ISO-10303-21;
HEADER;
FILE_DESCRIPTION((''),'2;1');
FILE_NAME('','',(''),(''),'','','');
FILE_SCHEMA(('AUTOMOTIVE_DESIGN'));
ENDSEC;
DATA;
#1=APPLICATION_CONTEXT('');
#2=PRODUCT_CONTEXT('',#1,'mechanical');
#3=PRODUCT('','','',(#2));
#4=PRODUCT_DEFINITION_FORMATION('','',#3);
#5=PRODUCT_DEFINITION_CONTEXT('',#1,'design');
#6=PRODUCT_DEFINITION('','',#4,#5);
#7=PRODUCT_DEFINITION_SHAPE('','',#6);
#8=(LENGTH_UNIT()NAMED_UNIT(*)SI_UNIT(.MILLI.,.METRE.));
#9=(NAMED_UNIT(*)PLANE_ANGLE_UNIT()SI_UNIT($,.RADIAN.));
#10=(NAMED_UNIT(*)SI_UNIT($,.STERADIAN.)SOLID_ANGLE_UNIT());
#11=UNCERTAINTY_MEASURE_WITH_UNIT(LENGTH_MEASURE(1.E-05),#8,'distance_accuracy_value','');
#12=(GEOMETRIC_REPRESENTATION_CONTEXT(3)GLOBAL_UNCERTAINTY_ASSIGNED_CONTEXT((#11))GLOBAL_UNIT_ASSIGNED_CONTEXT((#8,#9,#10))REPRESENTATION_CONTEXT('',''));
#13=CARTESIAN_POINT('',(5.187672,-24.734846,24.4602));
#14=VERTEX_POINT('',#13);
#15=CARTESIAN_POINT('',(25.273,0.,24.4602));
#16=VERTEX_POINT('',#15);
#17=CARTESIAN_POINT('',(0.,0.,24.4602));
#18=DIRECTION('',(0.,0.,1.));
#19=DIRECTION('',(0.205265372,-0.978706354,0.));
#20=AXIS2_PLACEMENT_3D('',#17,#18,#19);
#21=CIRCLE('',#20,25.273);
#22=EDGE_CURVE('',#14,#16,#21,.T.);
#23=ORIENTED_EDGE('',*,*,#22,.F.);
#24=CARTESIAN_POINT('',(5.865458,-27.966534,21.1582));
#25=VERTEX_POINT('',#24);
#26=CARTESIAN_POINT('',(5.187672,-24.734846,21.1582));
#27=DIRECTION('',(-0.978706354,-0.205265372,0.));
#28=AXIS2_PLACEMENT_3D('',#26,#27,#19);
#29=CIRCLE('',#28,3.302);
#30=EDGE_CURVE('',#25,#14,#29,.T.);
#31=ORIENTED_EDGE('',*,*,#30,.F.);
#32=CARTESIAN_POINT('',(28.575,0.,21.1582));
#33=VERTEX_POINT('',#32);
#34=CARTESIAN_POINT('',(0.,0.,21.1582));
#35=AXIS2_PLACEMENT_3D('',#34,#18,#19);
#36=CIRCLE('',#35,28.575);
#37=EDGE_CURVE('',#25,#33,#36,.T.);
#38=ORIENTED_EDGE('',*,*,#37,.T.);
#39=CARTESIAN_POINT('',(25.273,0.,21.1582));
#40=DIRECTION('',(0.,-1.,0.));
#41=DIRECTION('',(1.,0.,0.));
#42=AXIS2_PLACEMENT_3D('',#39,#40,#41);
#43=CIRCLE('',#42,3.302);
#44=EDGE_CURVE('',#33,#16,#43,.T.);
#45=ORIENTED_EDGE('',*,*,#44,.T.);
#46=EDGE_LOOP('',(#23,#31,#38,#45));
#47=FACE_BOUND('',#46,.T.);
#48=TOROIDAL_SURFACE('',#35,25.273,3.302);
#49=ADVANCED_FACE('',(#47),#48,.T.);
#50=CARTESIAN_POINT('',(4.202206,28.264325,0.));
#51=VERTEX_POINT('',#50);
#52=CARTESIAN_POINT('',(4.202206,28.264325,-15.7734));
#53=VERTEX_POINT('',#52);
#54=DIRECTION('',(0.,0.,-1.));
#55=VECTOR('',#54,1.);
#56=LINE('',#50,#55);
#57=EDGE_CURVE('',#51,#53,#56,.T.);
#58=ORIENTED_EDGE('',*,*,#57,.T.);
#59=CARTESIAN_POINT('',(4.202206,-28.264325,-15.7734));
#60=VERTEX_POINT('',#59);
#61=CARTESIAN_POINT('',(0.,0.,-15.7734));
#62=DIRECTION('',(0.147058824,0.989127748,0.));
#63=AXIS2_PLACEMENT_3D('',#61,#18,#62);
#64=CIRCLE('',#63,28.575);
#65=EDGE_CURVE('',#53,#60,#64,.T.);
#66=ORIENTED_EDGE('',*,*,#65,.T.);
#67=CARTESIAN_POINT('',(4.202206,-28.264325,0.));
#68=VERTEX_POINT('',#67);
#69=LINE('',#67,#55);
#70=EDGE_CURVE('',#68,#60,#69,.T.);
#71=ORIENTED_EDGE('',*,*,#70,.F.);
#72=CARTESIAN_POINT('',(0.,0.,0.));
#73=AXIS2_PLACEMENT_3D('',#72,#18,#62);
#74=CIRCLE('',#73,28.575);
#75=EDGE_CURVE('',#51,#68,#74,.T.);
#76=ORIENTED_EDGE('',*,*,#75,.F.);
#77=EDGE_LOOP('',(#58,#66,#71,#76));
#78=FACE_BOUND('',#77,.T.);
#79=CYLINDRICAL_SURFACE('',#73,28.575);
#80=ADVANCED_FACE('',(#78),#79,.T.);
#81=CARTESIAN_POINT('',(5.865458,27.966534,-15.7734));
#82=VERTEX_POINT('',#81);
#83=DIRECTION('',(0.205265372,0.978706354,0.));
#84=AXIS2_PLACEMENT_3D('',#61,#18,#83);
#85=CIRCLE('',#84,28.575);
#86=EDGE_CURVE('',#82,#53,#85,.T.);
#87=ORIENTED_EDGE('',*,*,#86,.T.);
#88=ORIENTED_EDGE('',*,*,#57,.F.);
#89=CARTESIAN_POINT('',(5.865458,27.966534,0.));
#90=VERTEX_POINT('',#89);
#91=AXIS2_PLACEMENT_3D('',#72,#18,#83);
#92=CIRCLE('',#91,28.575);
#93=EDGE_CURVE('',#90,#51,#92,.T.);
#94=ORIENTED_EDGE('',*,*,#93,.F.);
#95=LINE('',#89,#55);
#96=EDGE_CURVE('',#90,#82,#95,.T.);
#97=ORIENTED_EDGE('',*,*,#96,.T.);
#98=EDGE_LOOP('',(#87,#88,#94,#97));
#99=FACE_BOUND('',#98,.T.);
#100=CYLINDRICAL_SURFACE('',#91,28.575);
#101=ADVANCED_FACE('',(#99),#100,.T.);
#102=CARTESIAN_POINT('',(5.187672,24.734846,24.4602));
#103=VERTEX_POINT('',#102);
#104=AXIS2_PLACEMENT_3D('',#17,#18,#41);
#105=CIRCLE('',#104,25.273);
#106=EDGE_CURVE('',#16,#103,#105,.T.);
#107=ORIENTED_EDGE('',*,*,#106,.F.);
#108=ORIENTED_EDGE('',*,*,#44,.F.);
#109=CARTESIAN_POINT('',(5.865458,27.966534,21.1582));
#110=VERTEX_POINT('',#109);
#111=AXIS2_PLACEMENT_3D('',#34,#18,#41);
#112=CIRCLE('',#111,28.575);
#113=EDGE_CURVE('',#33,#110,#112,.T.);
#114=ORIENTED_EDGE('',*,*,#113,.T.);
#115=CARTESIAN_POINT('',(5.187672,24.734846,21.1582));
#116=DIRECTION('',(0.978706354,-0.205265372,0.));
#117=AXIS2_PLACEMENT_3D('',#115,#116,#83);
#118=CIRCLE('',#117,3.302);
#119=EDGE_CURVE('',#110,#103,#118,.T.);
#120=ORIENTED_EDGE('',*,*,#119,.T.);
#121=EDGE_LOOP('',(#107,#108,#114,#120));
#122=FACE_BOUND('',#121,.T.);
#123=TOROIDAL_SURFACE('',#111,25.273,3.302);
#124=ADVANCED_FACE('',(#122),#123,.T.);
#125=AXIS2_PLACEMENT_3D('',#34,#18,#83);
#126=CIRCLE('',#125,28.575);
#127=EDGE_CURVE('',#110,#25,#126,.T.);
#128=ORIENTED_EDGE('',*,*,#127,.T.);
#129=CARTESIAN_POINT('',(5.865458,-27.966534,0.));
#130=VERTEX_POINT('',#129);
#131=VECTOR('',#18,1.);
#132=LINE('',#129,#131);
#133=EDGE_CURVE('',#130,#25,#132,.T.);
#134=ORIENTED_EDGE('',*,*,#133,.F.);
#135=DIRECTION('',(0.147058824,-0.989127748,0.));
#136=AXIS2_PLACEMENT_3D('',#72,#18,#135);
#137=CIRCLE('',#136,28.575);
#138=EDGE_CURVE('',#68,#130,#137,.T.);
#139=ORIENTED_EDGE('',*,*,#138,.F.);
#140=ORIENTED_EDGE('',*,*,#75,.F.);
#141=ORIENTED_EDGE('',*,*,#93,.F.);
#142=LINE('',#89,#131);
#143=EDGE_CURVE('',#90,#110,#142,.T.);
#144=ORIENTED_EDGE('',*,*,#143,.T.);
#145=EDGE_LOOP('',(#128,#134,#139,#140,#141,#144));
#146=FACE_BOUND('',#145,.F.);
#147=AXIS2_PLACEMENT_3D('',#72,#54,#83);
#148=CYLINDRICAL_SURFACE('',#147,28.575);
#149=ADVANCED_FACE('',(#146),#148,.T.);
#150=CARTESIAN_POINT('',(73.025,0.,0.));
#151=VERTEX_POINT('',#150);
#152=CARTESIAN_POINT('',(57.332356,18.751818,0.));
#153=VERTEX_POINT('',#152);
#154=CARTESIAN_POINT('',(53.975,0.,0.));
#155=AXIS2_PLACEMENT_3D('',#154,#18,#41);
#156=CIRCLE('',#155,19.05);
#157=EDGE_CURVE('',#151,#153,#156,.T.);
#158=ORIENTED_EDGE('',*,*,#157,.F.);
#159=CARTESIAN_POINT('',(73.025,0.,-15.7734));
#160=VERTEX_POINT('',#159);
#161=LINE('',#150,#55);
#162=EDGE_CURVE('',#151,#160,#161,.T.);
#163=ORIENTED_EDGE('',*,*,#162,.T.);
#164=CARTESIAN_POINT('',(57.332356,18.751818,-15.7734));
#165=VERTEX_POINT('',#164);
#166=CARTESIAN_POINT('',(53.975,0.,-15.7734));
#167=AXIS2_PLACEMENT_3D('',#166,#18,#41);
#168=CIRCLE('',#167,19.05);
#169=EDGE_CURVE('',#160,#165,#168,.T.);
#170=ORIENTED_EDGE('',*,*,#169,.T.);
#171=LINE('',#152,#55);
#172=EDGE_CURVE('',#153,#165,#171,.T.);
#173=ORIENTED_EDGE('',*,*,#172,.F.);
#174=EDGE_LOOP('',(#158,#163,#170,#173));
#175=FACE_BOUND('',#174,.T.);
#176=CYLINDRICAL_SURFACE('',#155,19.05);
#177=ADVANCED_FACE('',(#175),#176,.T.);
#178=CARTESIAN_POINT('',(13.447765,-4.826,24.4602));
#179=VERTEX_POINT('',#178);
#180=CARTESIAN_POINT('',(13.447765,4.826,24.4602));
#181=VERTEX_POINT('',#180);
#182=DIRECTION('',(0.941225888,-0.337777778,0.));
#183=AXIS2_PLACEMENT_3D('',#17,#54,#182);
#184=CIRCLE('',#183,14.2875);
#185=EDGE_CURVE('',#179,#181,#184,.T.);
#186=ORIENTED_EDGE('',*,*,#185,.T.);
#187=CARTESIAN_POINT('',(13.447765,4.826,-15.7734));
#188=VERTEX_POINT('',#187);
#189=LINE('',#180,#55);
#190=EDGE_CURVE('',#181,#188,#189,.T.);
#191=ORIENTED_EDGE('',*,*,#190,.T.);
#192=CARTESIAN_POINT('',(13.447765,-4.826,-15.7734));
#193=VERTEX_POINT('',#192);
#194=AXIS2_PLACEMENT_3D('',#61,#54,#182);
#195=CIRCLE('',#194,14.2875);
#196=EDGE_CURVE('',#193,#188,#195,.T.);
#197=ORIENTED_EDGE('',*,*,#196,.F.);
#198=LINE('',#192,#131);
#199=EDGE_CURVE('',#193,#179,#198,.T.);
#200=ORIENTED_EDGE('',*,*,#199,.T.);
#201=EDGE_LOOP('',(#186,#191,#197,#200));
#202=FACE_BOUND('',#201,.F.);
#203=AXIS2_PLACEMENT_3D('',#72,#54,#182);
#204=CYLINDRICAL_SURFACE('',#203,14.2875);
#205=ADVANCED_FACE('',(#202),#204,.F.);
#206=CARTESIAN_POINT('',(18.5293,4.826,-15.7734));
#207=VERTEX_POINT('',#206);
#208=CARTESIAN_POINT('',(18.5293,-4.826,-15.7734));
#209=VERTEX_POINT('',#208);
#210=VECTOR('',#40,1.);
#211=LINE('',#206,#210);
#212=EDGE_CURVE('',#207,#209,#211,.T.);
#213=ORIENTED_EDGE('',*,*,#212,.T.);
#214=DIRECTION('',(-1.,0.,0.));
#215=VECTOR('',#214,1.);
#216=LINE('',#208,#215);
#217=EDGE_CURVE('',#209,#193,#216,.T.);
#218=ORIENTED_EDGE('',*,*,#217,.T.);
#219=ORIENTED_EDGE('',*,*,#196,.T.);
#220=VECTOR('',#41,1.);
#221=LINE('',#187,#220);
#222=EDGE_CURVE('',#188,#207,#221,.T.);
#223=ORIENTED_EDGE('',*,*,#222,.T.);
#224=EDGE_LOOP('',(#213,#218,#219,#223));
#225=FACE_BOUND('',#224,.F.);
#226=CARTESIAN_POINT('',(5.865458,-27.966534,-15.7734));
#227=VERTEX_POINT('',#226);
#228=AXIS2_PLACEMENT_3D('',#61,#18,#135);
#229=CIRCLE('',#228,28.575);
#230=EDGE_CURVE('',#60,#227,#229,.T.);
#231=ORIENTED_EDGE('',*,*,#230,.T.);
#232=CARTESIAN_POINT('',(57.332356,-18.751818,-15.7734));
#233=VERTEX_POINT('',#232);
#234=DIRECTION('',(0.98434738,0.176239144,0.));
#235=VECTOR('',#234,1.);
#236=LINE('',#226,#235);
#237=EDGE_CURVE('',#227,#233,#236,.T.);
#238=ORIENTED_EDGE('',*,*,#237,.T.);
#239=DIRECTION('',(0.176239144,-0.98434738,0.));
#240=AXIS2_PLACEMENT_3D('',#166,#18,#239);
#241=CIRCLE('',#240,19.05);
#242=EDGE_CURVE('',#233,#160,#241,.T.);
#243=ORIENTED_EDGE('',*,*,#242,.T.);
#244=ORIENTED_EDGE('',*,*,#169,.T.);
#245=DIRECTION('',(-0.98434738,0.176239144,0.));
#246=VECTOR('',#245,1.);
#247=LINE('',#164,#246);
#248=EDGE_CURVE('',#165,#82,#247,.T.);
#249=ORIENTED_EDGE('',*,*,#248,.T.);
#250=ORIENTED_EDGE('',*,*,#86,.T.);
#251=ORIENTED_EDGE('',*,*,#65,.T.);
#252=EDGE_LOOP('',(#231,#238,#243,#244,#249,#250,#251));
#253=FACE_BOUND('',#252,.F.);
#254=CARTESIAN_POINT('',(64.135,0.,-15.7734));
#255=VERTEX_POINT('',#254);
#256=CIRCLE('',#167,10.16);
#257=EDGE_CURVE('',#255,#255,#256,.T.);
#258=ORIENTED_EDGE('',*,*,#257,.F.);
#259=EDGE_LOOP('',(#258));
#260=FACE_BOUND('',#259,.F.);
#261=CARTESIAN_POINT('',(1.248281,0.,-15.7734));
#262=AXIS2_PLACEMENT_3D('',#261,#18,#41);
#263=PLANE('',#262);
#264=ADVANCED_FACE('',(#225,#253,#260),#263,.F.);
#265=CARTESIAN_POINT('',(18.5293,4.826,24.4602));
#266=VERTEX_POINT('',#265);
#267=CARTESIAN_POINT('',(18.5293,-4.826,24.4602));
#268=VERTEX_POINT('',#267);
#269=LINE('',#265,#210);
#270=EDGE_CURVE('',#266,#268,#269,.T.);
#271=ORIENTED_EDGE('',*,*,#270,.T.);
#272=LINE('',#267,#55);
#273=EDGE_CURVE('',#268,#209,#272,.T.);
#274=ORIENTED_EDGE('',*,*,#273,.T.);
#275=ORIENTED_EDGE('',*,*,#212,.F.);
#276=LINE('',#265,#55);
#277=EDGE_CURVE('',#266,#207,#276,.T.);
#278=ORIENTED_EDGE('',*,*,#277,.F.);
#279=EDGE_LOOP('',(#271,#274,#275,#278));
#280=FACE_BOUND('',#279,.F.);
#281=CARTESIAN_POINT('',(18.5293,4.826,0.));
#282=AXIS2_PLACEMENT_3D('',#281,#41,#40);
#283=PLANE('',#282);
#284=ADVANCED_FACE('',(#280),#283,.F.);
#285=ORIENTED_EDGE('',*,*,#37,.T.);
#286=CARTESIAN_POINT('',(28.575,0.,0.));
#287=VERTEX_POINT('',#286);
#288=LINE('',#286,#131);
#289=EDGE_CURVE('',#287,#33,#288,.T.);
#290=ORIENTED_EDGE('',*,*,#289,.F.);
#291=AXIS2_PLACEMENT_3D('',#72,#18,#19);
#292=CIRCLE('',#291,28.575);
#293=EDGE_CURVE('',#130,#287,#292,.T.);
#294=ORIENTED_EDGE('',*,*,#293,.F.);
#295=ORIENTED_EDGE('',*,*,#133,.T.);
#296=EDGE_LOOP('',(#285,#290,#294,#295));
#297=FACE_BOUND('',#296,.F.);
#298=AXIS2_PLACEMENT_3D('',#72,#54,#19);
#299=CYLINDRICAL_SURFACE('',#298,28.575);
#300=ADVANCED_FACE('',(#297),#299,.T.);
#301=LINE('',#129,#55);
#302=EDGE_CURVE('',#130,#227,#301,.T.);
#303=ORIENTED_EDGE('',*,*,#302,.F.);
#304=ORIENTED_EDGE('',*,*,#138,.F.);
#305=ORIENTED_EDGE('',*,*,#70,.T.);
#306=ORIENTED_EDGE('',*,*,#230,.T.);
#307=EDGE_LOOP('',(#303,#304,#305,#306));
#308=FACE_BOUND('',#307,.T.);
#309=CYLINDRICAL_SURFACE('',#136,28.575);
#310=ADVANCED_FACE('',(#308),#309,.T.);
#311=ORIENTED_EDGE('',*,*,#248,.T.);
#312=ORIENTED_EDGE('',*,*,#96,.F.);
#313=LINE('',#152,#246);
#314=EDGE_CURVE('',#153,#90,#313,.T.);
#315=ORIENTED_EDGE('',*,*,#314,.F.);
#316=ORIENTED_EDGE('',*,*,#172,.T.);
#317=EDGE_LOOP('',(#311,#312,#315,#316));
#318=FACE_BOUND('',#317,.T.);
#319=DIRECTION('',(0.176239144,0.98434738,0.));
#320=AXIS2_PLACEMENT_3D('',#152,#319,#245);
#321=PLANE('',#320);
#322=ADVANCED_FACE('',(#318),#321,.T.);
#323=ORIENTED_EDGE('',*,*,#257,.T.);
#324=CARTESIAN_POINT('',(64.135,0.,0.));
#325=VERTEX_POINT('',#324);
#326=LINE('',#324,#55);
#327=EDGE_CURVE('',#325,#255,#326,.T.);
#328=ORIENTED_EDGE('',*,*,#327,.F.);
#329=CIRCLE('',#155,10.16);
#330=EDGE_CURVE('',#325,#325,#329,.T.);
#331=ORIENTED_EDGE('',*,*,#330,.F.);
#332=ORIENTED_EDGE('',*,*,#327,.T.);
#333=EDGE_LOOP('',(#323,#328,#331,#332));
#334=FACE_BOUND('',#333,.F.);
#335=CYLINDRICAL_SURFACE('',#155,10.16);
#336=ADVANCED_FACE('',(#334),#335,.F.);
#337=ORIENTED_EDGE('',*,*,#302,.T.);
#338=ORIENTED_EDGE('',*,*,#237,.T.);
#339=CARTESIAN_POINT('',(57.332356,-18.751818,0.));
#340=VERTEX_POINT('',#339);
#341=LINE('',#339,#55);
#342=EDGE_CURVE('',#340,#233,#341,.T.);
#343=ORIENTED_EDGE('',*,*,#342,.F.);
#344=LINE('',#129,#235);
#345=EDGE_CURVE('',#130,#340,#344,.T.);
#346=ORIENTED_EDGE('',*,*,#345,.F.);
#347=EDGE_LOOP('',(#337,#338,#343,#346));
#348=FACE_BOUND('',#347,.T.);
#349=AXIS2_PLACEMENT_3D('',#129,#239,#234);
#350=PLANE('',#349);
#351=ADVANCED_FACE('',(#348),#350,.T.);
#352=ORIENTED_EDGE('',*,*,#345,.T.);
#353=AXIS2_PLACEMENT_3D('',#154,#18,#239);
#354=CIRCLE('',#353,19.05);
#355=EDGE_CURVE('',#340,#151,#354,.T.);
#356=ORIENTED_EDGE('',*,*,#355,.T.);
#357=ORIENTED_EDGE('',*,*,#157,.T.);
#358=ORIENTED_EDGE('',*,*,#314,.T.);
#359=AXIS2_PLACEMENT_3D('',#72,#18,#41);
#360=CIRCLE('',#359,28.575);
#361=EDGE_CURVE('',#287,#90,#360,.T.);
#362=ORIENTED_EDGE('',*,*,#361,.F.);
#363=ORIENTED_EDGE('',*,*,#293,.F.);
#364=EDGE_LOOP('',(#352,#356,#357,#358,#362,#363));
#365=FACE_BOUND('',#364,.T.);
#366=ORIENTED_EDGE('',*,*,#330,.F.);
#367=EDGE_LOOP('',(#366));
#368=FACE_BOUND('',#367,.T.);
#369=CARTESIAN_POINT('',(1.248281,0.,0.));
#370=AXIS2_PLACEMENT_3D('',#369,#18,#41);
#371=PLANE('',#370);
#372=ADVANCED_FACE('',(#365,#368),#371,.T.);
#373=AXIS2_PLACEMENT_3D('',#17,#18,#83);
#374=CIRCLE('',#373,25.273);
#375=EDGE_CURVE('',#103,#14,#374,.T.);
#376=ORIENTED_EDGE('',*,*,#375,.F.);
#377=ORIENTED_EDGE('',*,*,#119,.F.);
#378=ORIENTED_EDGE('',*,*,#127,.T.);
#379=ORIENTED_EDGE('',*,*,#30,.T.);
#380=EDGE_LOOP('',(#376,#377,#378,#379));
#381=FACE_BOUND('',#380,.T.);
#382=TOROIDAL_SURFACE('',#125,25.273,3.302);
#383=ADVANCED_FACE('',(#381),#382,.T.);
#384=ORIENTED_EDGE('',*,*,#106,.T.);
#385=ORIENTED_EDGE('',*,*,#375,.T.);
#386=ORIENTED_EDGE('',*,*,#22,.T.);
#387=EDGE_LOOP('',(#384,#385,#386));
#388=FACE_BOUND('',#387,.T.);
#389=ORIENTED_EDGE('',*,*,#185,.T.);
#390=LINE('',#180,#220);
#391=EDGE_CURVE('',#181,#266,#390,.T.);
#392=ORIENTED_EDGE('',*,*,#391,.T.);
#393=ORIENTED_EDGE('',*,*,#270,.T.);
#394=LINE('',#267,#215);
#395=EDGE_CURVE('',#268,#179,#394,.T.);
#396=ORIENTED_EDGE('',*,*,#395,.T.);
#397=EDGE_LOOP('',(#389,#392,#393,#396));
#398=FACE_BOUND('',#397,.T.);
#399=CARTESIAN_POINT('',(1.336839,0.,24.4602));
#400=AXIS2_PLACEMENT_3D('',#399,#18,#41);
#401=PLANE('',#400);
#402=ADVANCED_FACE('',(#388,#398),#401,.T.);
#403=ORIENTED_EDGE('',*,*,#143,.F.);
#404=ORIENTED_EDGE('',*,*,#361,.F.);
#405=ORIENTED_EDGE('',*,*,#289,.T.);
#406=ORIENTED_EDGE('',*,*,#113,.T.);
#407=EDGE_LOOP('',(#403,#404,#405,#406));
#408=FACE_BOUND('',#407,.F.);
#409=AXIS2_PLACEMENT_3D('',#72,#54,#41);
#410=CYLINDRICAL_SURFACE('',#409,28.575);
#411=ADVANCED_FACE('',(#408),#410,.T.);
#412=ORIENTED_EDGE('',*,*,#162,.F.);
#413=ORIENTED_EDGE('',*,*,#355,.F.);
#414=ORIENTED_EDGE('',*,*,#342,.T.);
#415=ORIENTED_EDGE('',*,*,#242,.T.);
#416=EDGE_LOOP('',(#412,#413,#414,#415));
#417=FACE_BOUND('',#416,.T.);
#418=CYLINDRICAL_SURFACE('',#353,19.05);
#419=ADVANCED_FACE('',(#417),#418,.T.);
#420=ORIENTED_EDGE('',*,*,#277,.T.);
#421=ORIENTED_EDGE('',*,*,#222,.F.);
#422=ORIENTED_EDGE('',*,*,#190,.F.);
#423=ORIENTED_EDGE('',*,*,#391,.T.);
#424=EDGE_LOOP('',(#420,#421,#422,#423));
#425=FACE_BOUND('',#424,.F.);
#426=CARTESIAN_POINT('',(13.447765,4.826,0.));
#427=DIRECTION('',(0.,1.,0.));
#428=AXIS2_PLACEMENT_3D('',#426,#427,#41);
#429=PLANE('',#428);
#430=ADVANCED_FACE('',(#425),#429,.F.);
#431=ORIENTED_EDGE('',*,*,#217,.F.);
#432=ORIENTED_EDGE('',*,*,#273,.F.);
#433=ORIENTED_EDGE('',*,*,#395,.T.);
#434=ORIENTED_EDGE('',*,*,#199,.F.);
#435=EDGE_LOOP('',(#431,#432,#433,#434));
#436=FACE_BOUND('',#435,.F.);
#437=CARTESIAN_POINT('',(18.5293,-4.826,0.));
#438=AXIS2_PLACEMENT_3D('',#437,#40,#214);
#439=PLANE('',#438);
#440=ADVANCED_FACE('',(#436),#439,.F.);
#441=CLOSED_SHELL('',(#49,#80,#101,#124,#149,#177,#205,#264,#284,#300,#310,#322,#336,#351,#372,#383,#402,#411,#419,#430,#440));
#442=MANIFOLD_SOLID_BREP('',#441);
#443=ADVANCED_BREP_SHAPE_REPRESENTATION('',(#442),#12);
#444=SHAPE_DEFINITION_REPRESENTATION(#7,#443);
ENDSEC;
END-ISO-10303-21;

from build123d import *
from build123d import SkipClean  # not in build123d's __all__

# Parameters (mm, degrees)
F0_R     = 10.16
F1_DEPTH = 15.7734
F3_DEPTH = 24.4602
F4_R     = 3.302


with BuildPart() as f1:
    # F0 (on Top) → F1 (new body)
    with BuildSketch(Plane.XY):
        with BuildLine():
            Line((5.865458004, 27.9665340613), (4.2022058824, 28.2643254072))
            ThreePointArc((4.2022058824, 28.2643254072), (-28.575, 0), (4.2022058824, -28.2643254072))
            Line((4.2022058824, -28.2643254072), (5.865458004, -27.9665340613))
            ThreePointArc((5.865458004, -27.9665340613), (22.182606784, -18.0128448966), (28.575, 0))
            ThreePointArc((28.575, 0), (22.182606784, 18.0128448966), (5.865458004, 27.9665340613))
        make_face()
        with BuildLine():
            ThreePointArc((13.4477648793, -4.826), (-14.2875, 0), (13.4477648793, 4.826))
            Line((13.4477648793, 4.826), (18.5293, 4.826))
            Line((18.5293, 4.826), (18.5293, -4.826))
            Line((18.5293, -4.826), (13.4477648793, -4.826))
        make_face(mode=Mode.SUBTRACT)
        with BuildLine():
            ThreePointArc((5.865458004, 27.9665340613), (5.0360335537, 28.1277263753), (4.2022058824, 28.2643254072))
            Line((4.2022058824, 28.2643254072), (5.865458004, 27.9665340613))
        make_face()
        with BuildLine():
            Line((5.865458004, -27.9665340613), (4.2022058824, -28.2643254072))
            ThreePointArc((4.2022058824, -28.2643254072), (5.0360335537, -28.1277263753), (5.865458004, -27.9665340613))
        make_face()
        with BuildLine():
            Line((57.3323557024, 18.7518175836), (5.865458004, 27.9665340613))
            ThreePointArc((5.865458004, 27.9665340613), (22.182606784, 18.0128448966), (28.575, 0))
            ThreePointArc((28.575, 0), (22.182606784, -18.0128448966), (5.865458004, -27.9665340613))
            Line((5.865458004, -27.9665340613), (57.3323557024, -18.7518175836))
            ThreePointArc((57.3323557024, -18.7518175836), (34.925, 0), (57.3323557024, 18.7518175836))
        make_face()
        with BuildLine():
            ThreePointArc((73.025, 0), (68.5842458076, 12.2258920711), (57.3323557024, 18.7518175836))
            ThreePointArc((57.3323557024, 18.7518175836), (34.925, 0), (57.3323557024, -18.7518175836))
            ThreePointArc((57.3323557024, -18.7518175836), (68.5842458076, -12.2258920711), (73.025, 0))
        make_face()
        with Locations((53.975, 0)):
            Circle(F0_R, mode=Mode.SUBTRACT)
    extrude(amount=-F1_DEPTH)

    # F2 (on face) → F3 (join)
    with BuildSketch(Plane.XY):
        with BuildLine():
            ThreePointArc((28.575, 0), (22.182606784, 18.0128448966), (5.865458004, 27.9665340613))
            ThreePointArc((5.865458004, 27.9665340613), (-28.575, 0), (5.865458004, -27.9665340613))
            ThreePointArc((5.865458004, -27.9665340613), (22.182606784, -18.0128448966), (28.575, 0))
        make_face()
        with BuildLine():
            ThreePointArc((13.4477648793, -4.826), (-14.2875, 0), (13.4477648793, 4.826))
            Line((13.4477648793, 4.826), (18.5293, 4.826))
            Line((18.5293, 4.826), (18.5293, -4.826))
            Line((18.5293, -4.826), (13.4477648793, -4.826))
        make_face(mode=Mode.SUBTRACT)
    with SkipClean():  # cleaning this boolean's faces spoils the solid; the shape is the same uncleaned
        extrude(amount=F3_DEPTH)

    # F4
    f4_edges = [f1.edges().sort_by_distance(p)[0] for p in [
        (-5.865458, 27.966534, 24.4602),
    ]]
    fillet(f4_edges, radius=F4_R)


solid = f1.part
